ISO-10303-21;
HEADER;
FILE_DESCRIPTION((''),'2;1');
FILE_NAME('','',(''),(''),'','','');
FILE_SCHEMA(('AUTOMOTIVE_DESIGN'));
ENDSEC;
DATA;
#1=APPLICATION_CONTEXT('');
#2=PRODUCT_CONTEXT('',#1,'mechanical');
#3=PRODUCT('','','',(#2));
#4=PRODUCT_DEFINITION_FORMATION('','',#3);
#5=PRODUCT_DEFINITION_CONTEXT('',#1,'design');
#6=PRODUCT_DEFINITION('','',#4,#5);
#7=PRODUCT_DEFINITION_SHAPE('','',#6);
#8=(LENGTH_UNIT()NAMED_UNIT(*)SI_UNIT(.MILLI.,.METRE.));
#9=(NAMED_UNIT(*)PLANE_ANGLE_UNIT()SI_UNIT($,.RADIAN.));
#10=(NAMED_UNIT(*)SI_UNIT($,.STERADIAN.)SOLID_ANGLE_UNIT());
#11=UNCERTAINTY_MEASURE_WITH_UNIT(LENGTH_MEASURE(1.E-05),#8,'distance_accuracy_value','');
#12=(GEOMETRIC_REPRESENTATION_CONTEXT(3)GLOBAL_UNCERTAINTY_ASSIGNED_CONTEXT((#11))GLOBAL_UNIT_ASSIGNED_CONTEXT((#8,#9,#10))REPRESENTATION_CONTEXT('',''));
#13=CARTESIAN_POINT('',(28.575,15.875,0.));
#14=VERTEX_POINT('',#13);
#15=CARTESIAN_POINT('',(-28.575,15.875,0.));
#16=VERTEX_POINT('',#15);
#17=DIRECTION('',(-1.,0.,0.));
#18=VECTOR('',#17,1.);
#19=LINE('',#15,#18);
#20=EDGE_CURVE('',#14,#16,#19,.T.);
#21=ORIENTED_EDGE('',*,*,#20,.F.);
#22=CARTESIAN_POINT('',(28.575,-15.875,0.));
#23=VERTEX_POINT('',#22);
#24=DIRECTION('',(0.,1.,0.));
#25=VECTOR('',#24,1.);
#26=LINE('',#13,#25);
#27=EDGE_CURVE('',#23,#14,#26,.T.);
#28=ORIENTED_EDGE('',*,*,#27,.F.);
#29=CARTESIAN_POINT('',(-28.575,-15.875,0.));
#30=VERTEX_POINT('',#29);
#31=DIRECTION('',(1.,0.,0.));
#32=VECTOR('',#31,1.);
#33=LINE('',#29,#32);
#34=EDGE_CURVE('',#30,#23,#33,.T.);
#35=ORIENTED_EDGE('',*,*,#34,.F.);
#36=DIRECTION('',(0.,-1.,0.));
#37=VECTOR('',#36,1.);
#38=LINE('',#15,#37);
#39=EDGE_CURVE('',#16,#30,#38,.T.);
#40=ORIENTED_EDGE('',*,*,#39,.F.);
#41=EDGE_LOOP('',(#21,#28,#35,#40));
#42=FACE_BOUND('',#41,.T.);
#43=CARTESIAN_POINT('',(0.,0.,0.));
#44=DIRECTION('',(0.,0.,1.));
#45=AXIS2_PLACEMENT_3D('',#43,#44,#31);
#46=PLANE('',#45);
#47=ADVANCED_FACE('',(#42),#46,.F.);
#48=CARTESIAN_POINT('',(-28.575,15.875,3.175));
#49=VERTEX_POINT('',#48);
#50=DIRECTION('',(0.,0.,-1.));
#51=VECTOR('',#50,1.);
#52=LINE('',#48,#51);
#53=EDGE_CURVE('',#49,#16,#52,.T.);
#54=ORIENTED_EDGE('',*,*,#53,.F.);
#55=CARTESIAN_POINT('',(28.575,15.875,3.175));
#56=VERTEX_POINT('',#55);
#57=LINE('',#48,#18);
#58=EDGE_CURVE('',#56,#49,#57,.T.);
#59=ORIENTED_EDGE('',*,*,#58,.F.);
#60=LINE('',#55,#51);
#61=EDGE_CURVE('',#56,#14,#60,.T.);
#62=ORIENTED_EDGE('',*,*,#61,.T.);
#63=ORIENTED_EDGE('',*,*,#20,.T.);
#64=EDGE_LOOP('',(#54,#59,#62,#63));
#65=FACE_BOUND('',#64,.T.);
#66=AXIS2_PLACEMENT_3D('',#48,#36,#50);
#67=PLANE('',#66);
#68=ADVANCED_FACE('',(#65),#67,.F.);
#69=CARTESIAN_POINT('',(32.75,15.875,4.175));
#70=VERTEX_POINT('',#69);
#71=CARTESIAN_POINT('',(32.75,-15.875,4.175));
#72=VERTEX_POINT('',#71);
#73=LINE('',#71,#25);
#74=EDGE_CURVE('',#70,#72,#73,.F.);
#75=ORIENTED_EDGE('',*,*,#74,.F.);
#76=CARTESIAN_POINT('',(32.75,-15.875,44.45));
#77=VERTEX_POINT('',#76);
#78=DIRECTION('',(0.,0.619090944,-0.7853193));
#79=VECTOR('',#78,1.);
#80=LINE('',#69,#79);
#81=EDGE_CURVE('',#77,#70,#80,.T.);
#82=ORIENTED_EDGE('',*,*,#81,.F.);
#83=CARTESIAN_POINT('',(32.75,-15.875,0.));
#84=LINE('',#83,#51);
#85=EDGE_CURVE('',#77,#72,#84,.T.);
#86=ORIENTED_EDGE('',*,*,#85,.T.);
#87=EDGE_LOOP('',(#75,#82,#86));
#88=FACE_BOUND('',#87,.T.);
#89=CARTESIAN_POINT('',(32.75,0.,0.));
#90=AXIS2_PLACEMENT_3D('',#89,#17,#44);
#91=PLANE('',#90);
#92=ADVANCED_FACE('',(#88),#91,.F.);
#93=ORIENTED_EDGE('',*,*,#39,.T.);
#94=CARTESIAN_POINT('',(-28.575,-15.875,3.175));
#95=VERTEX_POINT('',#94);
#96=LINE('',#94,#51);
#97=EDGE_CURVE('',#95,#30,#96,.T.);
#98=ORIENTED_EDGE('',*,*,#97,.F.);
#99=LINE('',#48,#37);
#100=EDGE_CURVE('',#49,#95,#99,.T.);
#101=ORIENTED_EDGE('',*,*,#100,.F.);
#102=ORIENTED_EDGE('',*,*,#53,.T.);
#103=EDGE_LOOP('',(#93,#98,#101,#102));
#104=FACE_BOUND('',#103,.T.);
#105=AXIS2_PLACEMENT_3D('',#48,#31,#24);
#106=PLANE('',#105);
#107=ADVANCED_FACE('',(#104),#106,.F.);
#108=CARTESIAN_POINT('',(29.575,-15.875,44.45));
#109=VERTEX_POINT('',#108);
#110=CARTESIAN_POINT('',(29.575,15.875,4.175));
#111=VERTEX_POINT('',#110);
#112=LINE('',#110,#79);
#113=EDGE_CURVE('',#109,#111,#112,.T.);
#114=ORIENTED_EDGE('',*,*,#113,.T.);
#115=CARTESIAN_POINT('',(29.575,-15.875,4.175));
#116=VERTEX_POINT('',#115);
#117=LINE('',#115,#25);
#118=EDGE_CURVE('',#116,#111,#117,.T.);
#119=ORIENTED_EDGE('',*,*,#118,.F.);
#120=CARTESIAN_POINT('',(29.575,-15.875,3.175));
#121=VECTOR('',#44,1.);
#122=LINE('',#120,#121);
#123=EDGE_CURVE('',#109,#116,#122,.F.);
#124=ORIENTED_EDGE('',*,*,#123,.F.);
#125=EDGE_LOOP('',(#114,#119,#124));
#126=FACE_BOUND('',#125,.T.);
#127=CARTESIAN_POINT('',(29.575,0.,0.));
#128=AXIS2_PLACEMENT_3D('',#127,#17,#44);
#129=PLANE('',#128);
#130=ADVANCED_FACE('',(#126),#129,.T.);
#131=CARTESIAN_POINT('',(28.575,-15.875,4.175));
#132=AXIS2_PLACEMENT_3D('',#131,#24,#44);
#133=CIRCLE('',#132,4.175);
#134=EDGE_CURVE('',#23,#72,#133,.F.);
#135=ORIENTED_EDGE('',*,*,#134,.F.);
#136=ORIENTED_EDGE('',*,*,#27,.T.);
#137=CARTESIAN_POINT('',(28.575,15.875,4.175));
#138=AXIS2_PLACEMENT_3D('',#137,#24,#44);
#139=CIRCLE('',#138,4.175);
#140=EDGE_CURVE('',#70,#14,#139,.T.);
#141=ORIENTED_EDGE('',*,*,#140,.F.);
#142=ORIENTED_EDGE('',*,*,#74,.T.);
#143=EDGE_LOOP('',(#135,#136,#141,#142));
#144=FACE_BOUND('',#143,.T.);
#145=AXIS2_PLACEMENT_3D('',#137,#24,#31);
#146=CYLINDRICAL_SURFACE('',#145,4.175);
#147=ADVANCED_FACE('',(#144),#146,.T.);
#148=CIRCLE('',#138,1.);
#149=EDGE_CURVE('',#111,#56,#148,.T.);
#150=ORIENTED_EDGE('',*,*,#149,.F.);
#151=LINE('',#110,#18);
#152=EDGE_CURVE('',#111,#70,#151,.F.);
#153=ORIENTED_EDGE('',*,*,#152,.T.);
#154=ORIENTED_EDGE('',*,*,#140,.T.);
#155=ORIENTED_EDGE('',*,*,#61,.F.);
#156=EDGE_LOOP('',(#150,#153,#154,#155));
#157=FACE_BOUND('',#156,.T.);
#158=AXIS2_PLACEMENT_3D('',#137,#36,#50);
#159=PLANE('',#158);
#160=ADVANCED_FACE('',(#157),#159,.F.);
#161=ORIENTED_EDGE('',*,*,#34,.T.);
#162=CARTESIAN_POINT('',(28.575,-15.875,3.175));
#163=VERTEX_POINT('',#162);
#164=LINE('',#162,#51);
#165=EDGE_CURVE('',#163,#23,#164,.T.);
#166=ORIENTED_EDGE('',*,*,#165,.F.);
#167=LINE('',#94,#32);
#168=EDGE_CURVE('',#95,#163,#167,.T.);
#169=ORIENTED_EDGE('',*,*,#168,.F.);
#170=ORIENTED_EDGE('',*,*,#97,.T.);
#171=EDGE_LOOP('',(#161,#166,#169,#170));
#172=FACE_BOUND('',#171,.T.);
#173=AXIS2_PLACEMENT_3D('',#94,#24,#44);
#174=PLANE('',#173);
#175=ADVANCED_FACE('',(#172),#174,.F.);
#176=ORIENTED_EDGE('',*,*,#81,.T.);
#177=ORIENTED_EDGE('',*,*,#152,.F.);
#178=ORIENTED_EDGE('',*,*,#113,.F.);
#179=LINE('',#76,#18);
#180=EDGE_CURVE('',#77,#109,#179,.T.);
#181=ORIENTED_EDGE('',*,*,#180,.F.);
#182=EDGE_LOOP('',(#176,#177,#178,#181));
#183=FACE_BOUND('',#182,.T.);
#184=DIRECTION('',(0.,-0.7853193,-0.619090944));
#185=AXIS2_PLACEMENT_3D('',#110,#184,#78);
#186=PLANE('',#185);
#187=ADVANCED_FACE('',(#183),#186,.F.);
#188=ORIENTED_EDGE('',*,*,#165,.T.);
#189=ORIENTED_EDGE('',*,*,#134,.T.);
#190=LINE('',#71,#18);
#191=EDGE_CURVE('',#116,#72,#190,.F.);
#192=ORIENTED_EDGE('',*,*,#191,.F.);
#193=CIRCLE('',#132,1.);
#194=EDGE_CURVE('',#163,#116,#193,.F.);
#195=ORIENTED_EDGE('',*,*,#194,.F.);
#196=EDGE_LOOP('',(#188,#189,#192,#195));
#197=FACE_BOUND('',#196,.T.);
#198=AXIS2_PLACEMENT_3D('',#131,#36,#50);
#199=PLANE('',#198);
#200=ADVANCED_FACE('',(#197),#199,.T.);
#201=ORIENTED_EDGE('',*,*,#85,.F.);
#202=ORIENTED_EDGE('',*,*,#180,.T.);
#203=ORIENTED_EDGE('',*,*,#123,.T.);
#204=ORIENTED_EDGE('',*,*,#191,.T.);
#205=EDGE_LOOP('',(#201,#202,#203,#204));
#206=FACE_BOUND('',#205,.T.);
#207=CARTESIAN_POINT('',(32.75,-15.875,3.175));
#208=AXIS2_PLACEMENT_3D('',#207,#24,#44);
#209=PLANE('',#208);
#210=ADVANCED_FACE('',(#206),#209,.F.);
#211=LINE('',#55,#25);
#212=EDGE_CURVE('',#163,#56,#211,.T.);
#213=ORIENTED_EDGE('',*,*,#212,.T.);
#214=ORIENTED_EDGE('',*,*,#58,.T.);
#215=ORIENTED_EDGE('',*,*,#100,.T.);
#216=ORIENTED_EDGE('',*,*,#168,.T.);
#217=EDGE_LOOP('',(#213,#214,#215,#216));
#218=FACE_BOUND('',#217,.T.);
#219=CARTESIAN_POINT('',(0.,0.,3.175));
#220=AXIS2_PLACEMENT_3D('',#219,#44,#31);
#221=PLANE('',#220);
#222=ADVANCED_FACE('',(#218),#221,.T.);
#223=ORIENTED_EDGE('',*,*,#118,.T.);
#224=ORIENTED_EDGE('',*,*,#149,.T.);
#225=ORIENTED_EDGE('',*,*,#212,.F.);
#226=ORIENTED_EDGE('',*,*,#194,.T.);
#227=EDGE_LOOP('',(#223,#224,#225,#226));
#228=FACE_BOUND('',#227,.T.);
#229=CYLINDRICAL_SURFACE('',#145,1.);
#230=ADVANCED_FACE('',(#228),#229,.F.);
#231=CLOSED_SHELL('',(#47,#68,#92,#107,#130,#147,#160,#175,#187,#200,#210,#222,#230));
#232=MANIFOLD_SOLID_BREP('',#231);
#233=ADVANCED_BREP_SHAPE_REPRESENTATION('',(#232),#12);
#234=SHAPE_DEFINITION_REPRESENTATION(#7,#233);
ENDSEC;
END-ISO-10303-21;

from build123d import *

# Parameters (mm, degrees)
SKETCH2_W          = 57.15
SKETCH2_H          = 31.75
BASE_FLANGE1_DEPTH = 3.175
EDGE_FLANGE1_DEPTH = 31.75
CUT_EXTRUDE1_DEPTH = 3.175


# Sheet-metal steps are written as plain solids
with BuildPart() as part:
    # Sketch2 → Base-Flange1 (new body)
    with BuildSketch(Plane.XY):
        Rectangle(SKETCH2_W, SKETCH2_H)
    extrude(amount=BASE_FLANGE1_DEPTH)

    # Edge-Flange1 section (across the edge) → Edge-Flange1 (add)
    with BuildSketch(Plane(origin=(29.575, -15.875, 3.175), x_dir=(-1, 0, 0), z_dir=(0, 1, 0))):
        with BuildLine():
            Line((-3.175, 1), (-3.175, 41.275))
            Line((-3.175, 41.275), (0, 41.275))
            Line((0, 41.275), (0, 1))
            ThreePointArc((0, 1), (0.292893219, 0.292893219), (1, 0))
            Line((1, 0), (1, -3.175))
            ThreePointArc((1, -3.175), (-1.952170811, -1.952170811), (-3.175, 1))
        make_face()
    extrude(amount=EDGE_FLANGE1_DEPTH)

    # Sketch10 → Cut-Extrude1 (cut)
    with BuildSketch(Plane(origin=(32.75, 0, 0), x_dir=(0, 0, -1), z_dir=(1, 0, 0))):
        Polygon((-4.175, 15.875), (-44.45, -15.875), (-44.45, 15.875), align=None)
    extrude(amount=-CUT_EXTRUDE1_DEPTH, mode=Mode.SUBTRACT)


solid = part.part
